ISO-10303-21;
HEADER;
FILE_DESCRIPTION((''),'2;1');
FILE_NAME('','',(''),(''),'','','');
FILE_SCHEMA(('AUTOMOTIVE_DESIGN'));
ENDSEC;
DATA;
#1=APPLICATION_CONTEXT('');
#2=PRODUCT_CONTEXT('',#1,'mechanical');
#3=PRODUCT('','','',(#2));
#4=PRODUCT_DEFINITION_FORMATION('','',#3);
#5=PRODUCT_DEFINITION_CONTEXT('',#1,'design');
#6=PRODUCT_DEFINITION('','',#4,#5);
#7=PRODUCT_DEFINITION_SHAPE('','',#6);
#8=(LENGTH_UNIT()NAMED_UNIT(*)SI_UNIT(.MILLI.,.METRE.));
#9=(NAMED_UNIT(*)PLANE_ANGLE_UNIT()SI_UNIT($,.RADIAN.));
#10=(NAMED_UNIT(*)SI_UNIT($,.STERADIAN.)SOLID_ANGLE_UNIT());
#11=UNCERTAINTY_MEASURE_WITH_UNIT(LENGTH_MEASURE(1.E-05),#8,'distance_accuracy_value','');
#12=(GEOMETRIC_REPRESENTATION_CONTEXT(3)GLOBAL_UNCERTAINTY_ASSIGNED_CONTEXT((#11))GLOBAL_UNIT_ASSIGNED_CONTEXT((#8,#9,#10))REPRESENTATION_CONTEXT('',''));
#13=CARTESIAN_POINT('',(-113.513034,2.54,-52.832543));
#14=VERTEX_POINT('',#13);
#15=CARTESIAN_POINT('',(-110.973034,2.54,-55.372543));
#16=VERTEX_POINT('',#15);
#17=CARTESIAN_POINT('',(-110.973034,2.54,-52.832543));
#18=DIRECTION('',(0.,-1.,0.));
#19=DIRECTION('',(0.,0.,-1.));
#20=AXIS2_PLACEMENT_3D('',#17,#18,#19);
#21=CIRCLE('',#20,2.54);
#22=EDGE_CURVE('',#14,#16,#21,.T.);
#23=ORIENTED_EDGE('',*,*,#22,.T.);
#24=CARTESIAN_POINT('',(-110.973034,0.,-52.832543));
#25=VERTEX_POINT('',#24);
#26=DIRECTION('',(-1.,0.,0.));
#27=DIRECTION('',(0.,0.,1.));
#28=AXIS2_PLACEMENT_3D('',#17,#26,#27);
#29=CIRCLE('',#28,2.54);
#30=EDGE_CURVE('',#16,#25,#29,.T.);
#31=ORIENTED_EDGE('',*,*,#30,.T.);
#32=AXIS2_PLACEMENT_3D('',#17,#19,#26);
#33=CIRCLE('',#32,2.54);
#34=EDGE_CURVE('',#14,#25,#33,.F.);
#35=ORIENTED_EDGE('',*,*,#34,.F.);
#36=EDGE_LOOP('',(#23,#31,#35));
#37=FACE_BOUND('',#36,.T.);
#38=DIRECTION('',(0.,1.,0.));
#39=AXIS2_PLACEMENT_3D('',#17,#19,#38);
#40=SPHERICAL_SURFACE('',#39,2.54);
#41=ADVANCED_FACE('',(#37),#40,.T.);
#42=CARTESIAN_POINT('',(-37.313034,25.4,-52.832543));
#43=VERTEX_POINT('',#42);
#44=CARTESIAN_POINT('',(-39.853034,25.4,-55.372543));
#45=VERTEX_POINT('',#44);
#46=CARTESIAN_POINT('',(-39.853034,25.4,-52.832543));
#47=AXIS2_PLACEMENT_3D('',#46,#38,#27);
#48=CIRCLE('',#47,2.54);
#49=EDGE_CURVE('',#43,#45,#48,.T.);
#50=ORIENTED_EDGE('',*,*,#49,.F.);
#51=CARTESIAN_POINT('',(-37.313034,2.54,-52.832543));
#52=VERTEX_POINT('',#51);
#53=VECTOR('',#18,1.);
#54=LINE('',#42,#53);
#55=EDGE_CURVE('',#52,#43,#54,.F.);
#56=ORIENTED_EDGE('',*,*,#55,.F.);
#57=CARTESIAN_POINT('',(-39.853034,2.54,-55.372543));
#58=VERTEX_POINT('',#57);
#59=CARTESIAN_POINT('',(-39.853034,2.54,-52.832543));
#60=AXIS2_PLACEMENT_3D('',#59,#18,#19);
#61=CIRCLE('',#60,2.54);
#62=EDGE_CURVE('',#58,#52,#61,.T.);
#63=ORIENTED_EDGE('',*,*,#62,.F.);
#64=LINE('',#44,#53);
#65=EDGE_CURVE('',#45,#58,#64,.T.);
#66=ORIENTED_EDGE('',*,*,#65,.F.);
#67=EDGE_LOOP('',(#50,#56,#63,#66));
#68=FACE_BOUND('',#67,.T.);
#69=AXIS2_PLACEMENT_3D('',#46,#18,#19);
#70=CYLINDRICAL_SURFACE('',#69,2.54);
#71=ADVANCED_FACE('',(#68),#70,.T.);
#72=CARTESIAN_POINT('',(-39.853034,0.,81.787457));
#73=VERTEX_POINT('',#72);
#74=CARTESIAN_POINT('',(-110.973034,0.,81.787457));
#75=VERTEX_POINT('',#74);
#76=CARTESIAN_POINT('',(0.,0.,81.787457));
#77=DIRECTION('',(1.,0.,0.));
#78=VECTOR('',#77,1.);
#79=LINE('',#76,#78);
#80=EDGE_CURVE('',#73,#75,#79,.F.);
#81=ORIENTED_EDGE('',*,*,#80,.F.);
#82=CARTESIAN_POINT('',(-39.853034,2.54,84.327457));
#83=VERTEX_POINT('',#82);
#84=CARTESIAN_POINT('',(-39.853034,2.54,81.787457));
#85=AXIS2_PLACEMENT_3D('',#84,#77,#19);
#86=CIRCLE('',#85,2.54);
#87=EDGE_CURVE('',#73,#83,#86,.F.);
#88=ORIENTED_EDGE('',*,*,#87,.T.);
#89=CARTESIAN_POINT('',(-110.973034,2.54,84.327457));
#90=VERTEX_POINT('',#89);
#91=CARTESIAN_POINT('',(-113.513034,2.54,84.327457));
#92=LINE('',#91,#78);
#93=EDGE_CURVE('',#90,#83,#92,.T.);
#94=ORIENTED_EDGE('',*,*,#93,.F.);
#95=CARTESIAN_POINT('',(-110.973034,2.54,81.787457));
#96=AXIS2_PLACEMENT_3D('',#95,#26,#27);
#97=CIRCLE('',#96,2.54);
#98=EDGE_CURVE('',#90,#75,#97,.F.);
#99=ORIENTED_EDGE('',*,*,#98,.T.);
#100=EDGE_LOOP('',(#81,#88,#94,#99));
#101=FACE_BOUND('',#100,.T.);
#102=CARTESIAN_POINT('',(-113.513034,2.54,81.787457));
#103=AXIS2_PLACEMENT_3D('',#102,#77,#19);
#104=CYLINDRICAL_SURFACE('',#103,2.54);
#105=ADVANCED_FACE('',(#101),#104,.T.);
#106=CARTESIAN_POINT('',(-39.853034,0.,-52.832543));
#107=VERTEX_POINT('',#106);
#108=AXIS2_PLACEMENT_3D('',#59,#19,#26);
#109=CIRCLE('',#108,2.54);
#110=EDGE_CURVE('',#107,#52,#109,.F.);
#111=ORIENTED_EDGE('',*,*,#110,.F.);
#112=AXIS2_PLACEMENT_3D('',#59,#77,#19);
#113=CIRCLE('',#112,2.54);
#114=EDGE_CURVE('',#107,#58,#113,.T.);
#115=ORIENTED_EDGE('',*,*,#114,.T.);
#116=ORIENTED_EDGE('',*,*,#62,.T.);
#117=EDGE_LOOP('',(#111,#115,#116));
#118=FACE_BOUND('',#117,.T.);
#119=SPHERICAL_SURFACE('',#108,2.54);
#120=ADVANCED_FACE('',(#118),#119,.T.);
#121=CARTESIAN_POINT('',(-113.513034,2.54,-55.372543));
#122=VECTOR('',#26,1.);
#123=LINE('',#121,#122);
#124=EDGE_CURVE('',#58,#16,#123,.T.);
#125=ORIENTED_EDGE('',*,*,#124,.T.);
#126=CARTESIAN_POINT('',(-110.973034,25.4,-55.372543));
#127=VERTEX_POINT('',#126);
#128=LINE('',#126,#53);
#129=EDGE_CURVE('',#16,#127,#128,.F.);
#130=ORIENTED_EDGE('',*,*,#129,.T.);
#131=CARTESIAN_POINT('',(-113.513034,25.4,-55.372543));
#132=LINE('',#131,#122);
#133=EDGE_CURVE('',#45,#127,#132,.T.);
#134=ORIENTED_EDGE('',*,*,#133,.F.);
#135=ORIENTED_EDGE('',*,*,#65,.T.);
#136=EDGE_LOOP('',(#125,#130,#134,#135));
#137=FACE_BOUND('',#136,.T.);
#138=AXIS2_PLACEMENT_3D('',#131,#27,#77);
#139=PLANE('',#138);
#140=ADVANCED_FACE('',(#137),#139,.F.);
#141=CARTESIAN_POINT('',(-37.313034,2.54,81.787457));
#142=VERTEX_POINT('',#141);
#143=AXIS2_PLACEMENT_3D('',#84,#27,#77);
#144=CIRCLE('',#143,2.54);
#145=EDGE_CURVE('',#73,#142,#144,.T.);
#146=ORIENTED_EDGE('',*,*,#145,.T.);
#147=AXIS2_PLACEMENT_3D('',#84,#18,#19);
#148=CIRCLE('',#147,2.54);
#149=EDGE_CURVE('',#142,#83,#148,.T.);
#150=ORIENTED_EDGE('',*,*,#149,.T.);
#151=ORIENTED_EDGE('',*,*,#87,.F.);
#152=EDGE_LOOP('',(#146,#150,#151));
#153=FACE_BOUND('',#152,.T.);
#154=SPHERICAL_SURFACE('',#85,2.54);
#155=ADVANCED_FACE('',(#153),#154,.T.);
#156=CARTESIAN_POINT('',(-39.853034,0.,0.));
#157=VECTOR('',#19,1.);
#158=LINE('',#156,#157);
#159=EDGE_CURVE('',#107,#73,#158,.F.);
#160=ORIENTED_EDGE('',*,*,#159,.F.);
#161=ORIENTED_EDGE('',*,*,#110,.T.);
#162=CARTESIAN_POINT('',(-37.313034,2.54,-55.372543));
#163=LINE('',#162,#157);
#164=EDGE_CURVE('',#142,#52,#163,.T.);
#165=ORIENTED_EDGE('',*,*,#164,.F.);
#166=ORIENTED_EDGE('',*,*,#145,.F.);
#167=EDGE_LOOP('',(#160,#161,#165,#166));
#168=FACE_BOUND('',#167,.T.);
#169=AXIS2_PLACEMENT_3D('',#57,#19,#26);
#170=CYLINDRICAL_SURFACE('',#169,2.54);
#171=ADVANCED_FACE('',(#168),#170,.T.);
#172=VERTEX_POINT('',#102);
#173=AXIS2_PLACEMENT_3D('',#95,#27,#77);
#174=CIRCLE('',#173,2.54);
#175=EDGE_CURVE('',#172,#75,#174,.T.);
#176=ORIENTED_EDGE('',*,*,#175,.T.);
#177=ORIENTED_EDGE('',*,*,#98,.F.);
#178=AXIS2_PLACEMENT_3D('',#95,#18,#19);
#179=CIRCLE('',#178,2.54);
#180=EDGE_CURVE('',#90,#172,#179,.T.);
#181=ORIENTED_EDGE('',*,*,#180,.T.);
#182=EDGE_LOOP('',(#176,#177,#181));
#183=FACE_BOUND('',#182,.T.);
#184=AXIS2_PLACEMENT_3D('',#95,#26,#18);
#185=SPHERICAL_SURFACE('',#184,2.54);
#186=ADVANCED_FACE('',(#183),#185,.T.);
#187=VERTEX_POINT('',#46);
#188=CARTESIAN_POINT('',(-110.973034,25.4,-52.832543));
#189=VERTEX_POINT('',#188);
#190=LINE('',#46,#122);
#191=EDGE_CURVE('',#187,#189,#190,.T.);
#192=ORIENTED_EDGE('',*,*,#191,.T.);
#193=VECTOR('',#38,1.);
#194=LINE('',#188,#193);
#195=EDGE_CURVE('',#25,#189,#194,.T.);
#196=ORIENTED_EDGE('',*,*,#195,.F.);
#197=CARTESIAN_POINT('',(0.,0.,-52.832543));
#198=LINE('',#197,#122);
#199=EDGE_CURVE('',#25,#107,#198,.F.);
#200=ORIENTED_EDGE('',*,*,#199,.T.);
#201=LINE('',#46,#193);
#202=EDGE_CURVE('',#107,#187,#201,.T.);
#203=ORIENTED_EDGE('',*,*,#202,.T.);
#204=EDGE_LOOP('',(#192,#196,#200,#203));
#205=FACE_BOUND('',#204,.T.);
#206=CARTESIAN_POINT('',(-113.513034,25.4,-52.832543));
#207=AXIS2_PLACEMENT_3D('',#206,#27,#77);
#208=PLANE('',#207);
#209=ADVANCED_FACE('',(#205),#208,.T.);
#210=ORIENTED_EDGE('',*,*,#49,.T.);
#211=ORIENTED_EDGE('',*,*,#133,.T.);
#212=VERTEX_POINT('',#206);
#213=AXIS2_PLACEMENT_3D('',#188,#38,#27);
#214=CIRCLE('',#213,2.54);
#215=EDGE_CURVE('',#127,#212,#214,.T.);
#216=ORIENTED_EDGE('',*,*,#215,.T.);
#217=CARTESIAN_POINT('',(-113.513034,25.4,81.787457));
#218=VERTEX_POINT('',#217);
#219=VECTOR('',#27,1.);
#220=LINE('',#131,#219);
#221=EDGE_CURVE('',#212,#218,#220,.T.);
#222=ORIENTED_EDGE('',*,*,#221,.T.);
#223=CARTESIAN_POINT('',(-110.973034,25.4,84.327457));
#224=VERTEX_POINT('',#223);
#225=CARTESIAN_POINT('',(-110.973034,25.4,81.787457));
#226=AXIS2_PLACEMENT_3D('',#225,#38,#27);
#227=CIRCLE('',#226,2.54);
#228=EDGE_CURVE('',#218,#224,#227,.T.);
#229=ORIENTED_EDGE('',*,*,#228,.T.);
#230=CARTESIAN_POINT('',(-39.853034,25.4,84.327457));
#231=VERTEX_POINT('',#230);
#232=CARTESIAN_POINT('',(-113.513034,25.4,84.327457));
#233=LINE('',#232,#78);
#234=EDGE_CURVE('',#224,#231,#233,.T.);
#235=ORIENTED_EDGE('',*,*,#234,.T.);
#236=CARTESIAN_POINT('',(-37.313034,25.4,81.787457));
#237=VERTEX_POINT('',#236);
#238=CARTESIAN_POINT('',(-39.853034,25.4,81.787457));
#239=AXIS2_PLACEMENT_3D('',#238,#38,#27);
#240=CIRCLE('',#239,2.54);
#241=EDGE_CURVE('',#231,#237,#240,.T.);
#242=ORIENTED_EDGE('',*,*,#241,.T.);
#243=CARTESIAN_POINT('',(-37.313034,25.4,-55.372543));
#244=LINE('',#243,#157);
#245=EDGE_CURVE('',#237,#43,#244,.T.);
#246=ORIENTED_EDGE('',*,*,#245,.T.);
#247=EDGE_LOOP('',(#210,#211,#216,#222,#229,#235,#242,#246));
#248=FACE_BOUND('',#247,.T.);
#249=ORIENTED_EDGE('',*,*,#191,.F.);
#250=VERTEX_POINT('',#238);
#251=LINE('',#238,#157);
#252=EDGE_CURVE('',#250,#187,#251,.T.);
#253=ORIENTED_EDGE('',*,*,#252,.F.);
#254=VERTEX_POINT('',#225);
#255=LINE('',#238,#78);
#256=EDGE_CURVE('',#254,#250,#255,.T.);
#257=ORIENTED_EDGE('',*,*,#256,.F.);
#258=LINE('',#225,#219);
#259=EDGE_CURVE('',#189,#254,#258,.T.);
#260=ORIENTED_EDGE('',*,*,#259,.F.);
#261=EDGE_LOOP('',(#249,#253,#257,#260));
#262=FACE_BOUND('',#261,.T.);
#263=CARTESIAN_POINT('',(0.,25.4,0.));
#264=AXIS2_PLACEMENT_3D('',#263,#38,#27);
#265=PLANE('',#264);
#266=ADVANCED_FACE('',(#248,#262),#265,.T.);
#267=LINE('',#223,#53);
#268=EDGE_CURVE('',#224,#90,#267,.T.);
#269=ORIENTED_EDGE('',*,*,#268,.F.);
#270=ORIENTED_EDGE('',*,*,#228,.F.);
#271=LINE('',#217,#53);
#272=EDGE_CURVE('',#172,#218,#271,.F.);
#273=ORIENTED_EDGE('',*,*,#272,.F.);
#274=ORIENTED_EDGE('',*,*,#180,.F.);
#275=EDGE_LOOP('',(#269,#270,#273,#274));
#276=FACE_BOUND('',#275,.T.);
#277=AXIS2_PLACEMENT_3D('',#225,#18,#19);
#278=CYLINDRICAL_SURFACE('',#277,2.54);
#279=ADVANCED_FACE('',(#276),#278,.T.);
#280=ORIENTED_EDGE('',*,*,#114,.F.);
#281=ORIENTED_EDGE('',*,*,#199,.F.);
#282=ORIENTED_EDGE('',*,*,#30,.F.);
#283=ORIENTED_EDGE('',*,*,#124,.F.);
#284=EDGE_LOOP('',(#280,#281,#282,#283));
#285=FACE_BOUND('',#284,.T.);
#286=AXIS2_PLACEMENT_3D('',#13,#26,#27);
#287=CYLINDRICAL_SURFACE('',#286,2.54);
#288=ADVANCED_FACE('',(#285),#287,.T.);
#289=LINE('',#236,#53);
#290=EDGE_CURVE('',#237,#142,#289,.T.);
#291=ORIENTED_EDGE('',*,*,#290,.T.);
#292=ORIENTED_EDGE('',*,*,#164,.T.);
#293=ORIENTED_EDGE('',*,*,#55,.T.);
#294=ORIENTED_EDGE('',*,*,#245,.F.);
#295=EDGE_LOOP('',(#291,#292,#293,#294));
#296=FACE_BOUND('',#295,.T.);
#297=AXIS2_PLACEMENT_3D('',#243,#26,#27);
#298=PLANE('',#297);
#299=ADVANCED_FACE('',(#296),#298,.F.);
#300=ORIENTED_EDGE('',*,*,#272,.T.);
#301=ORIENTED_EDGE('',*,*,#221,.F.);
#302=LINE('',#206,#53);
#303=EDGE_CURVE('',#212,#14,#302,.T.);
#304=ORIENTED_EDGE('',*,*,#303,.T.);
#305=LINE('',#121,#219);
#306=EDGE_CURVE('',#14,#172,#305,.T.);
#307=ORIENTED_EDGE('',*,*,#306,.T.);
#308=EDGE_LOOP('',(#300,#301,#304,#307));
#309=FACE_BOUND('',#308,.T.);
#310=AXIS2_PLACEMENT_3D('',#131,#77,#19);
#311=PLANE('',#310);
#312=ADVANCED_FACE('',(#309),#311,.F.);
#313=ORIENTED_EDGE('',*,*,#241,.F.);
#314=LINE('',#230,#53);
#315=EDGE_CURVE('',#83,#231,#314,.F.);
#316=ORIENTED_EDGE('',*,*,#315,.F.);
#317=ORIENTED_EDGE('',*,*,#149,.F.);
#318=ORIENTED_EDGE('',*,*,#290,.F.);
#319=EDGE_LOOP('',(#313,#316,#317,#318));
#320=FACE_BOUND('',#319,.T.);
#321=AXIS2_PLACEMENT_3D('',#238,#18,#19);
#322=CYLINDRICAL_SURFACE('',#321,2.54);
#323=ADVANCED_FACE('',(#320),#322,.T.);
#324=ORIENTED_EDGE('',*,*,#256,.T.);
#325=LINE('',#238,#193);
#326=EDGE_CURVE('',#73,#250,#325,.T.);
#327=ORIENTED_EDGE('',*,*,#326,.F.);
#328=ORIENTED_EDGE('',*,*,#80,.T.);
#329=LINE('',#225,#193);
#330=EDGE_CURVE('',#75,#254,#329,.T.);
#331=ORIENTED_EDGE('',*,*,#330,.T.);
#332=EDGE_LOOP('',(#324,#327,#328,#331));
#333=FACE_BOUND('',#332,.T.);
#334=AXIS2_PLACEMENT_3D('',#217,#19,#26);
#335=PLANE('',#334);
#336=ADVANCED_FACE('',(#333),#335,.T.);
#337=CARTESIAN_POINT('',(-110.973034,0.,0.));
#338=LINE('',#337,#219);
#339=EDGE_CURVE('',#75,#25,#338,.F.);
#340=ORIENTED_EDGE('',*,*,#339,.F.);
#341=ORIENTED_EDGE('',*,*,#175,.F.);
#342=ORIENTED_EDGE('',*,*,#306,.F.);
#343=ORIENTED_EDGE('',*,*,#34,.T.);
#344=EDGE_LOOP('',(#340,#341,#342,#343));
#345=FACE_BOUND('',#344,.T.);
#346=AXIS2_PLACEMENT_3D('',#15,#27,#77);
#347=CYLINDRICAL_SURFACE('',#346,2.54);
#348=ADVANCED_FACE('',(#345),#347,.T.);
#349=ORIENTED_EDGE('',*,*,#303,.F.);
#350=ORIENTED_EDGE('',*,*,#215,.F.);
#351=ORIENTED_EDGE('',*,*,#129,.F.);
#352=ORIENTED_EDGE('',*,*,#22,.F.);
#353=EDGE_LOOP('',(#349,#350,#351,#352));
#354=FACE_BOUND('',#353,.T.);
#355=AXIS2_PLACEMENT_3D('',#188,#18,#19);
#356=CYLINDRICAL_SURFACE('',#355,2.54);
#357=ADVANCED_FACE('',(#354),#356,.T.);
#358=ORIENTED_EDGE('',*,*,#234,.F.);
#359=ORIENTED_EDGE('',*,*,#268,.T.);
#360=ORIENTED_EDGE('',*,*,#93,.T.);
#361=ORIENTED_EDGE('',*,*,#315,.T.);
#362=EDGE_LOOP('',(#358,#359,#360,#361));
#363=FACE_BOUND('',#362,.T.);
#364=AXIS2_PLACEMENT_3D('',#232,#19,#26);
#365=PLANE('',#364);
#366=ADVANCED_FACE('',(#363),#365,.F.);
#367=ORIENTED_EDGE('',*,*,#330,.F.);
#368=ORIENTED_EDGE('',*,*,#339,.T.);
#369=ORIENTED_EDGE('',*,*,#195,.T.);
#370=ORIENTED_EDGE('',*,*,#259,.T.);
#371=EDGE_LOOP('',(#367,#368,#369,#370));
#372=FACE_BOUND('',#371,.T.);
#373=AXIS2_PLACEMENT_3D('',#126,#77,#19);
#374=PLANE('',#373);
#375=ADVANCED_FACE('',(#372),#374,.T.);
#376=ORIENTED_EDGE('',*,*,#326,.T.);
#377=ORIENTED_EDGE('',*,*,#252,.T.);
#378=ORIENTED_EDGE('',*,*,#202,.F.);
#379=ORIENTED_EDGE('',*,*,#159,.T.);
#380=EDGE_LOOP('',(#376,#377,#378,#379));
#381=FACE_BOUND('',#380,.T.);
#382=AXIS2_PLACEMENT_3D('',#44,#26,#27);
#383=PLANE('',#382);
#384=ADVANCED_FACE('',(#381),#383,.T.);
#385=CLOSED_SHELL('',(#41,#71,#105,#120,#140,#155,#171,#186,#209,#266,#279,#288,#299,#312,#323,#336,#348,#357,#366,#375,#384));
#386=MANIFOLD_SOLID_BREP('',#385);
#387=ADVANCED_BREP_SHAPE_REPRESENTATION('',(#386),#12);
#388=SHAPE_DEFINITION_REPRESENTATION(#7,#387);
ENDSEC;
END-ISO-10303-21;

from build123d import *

# Parameters (mm, degrees)
SKETCH1_W           = 76.2
SKETCH1_H           = 139.7
BOSS_EXTRUDE1_DEPTH = 25.4
FILLET1_R           = 2.54
SHELL1_START        = -110.973034188
SHELL1_OUTLINE_W    = 20.32
SHELL1_OUTLINE_H    = 134.62
SHELL1_DEPTH        = 71.12
SKETCH5_W           = 71.12
SKETCH5_H           = 134.62
CUT_EXTRUDE1_DEPTH  = 25.4


# Read off the part's stored shape, not the designer's step: Shell1
with BuildPart() as part:
    # Sketch1 → Boss-Extrude1 (new body)
    with BuildSketch(Plane(origin=(0, 0, 0), x_dir=(1, 0, 0), z_dir=(0, 1, 0))):
        with Locations((-75.413034188, -14.477457265)):
            Rectangle(SKETCH1_W, SKETCH1_H)
    extrude(amount=BOSS_EXTRUDE1_DEPTH)

    # Fillet1
    fillet1_edges = [part.edges().sort_by_distance(p)[0] for p in [
        (-75.413034188, 0, -55.372542735),
        (-37.313034188, 0, 14.477457265),
        (-75.413034188, 0, 84.327457265),
        (-113.513034188, 0, 14.477457265),
        (-113.513034188, 12.7, -55.372542735),
        (-37.313034188, 12.7, -55.372542735),
        (-37.313034188, 12.7, 84.327457265),
        (-113.513034188, 12.7, 84.327457265),
    ]]
    fillet(fillet1_edges, radius=FILLET1_R)

    # Shell1 outline → Shell1 (cut)
    with BuildSketch(Plane.YZ.offset(SHELL1_START)):
        with Locations((12.7, 14.477457265)):
            Rectangle(SHELL1_OUTLINE_W, SHELL1_OUTLINE_H)
    extrude(amount=SHELL1_DEPTH, mode=Mode.SUBTRACT)

    # Sketch5 → Cut-Extrude1 (cut)
    with BuildSketch(Plane(origin=(0, 25.4, 0), x_dir=(1, 0, 0), z_dir=(0, 1, 0))):
        with Locations((-75.413034188, -14.477457265)):
            Rectangle(SKETCH5_W, SKETCH5_H)
    extrude(amount=-CUT_EXTRUDE1_DEPTH, mode=Mode.SUBTRACT)


solid = part.part
